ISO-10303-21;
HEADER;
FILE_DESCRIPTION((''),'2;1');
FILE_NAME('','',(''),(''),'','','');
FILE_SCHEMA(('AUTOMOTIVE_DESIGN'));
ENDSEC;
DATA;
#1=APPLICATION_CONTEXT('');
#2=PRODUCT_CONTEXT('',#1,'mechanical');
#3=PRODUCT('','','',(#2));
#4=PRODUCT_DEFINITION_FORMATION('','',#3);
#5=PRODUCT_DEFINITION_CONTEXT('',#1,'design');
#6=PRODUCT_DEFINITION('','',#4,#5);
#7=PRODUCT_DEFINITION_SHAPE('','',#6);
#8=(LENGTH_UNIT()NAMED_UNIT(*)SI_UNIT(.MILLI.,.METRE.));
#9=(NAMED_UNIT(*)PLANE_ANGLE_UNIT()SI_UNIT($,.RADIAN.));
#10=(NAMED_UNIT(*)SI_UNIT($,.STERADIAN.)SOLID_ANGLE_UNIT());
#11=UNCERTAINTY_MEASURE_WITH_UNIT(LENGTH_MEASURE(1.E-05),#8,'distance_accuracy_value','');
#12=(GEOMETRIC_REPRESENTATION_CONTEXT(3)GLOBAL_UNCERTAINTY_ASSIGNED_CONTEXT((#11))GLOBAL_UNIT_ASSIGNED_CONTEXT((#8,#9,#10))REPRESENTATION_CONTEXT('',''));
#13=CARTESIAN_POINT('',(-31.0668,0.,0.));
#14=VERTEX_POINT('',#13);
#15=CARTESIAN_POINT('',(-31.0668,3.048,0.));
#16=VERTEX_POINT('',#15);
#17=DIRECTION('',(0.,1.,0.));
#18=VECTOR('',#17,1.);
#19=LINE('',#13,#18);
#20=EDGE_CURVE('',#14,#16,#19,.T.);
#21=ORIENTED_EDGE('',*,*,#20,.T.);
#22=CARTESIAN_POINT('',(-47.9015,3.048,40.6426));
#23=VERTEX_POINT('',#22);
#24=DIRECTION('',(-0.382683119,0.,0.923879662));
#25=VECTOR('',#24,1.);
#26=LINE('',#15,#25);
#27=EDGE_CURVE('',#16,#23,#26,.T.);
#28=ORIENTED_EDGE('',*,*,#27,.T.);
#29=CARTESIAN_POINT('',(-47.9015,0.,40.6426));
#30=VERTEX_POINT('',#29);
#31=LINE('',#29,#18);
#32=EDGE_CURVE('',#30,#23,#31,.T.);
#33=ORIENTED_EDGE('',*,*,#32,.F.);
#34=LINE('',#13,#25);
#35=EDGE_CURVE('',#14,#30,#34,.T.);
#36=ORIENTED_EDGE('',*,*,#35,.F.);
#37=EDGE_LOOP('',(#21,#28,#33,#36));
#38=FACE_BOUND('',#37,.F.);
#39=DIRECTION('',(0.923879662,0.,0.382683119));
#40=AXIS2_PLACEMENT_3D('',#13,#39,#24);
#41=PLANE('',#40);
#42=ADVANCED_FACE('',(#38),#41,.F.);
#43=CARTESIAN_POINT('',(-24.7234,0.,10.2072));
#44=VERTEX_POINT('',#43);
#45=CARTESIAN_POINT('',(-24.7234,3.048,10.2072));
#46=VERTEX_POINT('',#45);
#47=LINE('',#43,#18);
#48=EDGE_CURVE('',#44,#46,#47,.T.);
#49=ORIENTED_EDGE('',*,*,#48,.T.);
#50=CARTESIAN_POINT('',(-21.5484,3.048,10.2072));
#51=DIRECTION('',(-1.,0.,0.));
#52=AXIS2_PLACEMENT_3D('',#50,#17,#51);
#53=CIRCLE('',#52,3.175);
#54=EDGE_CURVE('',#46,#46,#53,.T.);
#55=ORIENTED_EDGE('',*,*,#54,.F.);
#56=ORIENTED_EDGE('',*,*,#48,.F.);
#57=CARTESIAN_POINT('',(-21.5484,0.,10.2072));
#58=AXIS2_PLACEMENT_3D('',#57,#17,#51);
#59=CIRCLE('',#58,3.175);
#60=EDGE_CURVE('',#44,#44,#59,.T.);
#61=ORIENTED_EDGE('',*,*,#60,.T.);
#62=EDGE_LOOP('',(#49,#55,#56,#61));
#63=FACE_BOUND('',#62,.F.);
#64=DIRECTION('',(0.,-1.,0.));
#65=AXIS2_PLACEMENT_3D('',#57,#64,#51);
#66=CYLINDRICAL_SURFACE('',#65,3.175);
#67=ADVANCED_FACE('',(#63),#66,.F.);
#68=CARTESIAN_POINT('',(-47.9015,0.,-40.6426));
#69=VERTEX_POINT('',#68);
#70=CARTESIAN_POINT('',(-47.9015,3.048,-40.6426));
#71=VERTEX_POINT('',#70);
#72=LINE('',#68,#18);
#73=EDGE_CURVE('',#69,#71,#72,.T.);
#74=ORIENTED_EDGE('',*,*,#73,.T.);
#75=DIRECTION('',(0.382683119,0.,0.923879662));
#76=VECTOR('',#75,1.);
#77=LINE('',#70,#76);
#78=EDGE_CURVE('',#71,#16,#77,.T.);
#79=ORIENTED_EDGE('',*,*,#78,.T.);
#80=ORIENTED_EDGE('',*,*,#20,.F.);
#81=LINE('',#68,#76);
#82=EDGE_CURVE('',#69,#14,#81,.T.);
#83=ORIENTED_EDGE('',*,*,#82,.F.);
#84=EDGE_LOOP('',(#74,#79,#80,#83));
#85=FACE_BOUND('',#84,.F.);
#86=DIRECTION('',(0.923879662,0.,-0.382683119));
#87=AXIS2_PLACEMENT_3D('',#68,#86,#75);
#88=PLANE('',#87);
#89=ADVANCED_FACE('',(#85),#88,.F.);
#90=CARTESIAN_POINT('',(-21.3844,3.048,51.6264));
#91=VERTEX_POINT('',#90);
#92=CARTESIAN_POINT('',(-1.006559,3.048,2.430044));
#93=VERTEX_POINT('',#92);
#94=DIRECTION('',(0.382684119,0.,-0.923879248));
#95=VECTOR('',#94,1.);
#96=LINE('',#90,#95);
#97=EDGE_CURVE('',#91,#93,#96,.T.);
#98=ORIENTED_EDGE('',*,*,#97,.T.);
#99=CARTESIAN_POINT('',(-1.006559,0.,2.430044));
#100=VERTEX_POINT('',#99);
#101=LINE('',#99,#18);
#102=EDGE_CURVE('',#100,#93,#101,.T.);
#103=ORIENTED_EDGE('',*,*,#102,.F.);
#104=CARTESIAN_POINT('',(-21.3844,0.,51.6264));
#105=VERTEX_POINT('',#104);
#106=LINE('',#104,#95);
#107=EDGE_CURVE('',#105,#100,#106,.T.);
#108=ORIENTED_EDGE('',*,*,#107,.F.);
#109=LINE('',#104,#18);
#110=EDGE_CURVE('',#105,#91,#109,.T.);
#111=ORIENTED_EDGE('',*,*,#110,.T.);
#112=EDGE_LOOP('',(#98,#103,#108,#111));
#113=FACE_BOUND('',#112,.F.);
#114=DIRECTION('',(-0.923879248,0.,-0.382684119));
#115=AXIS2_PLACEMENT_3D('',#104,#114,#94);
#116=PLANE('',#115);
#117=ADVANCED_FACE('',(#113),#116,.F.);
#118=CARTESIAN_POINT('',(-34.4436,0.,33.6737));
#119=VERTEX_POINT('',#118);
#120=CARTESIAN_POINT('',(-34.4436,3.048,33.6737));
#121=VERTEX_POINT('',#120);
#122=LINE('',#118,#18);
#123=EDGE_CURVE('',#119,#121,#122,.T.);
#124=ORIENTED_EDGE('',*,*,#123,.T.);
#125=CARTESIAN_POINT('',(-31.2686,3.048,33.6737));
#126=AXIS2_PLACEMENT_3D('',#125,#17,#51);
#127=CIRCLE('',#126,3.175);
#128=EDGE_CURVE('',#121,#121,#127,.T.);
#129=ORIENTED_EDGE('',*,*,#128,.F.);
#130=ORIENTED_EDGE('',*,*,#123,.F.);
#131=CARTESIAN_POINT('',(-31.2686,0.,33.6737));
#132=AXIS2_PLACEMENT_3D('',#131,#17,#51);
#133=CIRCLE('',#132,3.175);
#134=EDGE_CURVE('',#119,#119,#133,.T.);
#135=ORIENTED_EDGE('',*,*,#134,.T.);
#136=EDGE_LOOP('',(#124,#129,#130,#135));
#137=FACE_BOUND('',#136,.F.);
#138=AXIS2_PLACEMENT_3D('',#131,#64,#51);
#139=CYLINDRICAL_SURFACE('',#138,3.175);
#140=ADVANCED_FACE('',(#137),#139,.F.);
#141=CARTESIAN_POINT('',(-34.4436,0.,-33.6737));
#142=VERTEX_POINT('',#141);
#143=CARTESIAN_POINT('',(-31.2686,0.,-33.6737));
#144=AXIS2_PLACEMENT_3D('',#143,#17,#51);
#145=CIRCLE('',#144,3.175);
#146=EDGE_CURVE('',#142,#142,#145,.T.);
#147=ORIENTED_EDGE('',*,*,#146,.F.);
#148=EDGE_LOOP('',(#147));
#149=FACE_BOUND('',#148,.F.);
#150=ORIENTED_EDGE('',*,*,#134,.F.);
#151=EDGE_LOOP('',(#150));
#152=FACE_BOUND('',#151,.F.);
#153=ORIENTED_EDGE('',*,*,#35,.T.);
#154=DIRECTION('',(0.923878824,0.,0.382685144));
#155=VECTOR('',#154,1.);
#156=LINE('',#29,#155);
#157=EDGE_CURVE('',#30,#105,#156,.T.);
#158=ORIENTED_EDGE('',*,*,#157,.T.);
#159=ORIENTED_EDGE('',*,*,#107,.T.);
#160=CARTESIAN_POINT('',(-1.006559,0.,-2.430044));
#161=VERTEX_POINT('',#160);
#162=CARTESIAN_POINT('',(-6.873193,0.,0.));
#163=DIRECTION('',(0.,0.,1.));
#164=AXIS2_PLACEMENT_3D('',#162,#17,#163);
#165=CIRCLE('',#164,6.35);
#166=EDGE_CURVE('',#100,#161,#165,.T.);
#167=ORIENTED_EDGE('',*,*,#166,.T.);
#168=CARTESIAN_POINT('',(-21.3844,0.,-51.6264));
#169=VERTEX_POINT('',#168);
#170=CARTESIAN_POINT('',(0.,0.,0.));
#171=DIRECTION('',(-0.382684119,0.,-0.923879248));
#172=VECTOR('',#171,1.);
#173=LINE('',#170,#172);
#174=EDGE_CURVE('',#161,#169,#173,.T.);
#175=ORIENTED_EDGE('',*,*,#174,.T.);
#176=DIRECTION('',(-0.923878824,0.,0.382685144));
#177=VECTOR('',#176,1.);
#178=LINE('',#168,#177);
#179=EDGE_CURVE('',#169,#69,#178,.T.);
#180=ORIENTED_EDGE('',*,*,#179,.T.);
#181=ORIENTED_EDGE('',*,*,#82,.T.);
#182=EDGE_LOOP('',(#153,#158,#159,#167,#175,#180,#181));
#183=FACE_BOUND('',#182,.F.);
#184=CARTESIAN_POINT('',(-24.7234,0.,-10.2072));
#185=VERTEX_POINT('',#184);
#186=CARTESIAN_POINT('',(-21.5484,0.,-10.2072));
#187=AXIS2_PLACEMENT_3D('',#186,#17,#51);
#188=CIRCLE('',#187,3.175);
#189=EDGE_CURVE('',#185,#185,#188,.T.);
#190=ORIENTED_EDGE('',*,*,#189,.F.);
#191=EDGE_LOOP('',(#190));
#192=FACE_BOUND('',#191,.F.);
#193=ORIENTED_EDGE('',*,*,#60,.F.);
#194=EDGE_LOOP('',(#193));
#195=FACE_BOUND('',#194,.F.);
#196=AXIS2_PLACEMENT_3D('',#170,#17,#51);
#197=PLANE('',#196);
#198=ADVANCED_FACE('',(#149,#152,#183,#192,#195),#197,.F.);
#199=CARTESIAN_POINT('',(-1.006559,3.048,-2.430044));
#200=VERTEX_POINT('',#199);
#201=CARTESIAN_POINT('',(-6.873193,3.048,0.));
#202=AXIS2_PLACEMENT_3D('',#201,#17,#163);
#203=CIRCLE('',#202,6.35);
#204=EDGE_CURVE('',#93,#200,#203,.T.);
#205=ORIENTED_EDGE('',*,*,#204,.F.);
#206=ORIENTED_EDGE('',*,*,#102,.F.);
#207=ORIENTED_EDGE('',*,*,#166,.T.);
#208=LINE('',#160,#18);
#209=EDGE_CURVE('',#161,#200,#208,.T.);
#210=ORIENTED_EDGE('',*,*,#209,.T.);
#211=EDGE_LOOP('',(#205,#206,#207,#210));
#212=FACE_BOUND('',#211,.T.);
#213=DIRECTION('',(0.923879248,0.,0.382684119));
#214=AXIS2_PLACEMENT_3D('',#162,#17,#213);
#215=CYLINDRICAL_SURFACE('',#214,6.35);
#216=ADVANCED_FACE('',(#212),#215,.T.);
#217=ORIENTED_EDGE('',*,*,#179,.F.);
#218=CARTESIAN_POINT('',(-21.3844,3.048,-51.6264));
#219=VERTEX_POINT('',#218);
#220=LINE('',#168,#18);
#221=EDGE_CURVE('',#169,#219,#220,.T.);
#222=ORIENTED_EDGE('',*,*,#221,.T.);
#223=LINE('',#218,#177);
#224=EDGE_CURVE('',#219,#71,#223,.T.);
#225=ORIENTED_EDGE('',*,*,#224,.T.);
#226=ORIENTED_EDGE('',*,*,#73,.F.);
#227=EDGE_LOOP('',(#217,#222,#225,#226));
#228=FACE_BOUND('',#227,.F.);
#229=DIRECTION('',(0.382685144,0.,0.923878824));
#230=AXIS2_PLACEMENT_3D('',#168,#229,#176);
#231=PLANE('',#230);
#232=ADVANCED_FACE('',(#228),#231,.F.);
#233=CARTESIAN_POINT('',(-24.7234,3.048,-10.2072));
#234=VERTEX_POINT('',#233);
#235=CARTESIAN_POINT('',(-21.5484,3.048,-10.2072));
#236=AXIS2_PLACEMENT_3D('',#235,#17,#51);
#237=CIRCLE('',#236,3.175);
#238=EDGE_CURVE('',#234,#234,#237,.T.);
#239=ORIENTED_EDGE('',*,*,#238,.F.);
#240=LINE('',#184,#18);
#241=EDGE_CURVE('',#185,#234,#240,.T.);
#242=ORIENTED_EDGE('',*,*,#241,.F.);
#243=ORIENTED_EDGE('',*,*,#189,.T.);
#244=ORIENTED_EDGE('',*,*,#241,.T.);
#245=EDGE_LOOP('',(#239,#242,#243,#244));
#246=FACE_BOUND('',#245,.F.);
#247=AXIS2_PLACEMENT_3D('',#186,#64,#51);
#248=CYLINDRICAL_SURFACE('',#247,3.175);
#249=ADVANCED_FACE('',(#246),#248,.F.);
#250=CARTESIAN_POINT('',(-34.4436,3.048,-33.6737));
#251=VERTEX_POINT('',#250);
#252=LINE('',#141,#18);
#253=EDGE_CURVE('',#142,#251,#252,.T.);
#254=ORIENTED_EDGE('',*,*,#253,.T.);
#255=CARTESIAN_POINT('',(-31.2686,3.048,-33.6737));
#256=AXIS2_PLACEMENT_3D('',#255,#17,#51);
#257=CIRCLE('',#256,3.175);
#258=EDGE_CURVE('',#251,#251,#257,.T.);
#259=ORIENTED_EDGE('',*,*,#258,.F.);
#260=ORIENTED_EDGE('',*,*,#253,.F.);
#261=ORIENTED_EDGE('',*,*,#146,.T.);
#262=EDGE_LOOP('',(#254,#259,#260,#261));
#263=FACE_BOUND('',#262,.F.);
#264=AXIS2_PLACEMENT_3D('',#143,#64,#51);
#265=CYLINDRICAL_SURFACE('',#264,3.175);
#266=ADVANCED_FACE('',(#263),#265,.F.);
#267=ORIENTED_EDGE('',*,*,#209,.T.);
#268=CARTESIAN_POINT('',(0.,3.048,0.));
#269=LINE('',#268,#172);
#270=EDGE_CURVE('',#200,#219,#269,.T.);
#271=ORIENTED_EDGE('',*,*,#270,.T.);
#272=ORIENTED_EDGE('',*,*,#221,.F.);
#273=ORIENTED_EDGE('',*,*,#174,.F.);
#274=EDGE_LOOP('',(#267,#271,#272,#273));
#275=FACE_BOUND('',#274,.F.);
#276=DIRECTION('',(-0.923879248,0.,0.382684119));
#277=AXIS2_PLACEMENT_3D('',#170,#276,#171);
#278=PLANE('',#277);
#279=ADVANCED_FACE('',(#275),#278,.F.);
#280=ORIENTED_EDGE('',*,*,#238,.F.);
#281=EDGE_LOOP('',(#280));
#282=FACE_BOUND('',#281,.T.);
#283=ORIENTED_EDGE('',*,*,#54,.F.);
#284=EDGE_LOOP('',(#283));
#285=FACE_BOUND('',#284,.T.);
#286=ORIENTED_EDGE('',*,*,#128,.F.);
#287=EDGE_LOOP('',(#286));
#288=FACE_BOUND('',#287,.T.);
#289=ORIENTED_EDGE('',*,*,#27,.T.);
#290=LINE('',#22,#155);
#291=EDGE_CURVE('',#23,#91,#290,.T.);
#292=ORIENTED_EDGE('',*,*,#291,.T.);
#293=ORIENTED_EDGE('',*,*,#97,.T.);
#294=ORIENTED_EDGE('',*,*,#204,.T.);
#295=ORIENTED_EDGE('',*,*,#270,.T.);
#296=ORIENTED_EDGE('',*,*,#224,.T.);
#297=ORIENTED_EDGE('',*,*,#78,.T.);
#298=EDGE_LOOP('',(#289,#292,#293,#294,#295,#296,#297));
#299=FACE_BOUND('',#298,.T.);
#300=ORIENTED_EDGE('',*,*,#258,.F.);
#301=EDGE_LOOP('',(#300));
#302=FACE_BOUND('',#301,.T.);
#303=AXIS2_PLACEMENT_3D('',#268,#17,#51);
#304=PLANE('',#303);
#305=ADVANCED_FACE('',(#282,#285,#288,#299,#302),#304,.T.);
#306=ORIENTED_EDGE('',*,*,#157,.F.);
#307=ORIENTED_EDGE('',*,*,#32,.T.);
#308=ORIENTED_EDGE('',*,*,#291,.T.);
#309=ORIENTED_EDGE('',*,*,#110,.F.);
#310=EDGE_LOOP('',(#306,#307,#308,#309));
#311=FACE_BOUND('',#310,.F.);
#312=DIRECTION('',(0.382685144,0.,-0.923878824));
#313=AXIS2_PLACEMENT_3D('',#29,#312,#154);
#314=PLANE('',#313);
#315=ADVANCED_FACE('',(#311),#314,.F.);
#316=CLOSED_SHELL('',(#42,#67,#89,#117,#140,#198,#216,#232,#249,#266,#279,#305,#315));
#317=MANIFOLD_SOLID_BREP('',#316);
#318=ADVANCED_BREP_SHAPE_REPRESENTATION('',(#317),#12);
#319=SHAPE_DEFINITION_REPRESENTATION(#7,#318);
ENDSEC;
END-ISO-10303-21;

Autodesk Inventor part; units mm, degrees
ref_plane "YZ Plane" through (0, 0, 0) normal (1, 0, 0) x (0, 1, 0)
ref_plane "XZ Plane" through (0, 0, 0) normal (0, 1, 0) x (-1, 0, 0)
ref_plane "XY Plane" through (0, 0, 0) normal (0, 0, 1) x (1, 0, 0)
sketch "Sketch1" plane through (0, 0, 0) normal (0, 1, 0) x (-1, 0, 0)
  line L0 (0, 0) -> (21.3844, -51.6264)
  line L1 (21.3844, -51.6264) -> (47.9015, -40.6426)
  line L2 (47.9015, -40.6426) -> (31.0668, 0)
  line L3 (31.0668, 0) -> (47.9015, 40.6426)
  line L4 (47.9015, 40.6426) -> (21.3844, 51.6264)
  line L5 (21.3844, 51.6264) -> (0, 0)
  line L6 (31.0668, 0) -> (0, 0) construction
  line L7 (17.3204, 0) -> (56.2011, 93.8662) construction
  circle A0 centre (50.7089, 80.6068) radius 3.175
  circle A1 centre (40.9887, 57.1403) radius 3.175
  circle A2 centre (31.2686, 33.6737) radius 3.175
  circle A3 centre (21.5484, 10.2072) radius 3.175
  line L8 (13.0041, 3.7198) -> (13.0041, -3.7198) construction
  line L9 (13.0041, 0) -> (1.9044, 4.5976) construction
  line L10 (32.6076, 3.7198) -> (1.5408, 3.7198) construction
  line L11 (1.5408, -3.7198) -> (32.6076, -3.7198) construction
  circle A4 centre (21.5484, -10.2072) radius 3.175
  circle A5 centre (31.2686, -33.6737) radius 3.175
  dimension "d0" = 28.702
  dimension "d1" = 135
  dimension "d2" = 55.88
  dimension "d3" = 101.6
  dimension "d4" = 6.35
  dimension "d7" = 25.4
  dimension "d12" = 3.7198
  dimension "d13" = 12.7
  dimension "d14" = 12.0142
  dimension "d15" = 12.7
extrude "Plate1" add sketch "Sketch1" along normal blind 3.048 contours L5 L4 L3 L2 L1 L0
fillet "Corner Round1" radius 6.35 1 edges at (0, 1.524, 0)
equation "\"d3\" = 0.5 * CornerLength"
equation "\"BendRadius\" = Thickness"
equation "\"BendReliefWidth\" = Thickness"
equation "\"BendReliefDepth\" = 0.5 * Thickness"
equation "\"CornerReliefSize\" = 4 * Thickness"
equation "\"MinimumRemnant\" = 2 * Thickness"
equation "\"TransitionRadius\" = BendRadius"
equation "\"JacobiRadiusSize\" = BendRadius"
equation "\"GapSize\" = Thickness"
equation "\"d16\" = BendRadius"
equation "\"CornerLength\" = 203.2"
equation "\"Thickness\" = 3.048"
properties part number "CornerBracketSheetMetal"
